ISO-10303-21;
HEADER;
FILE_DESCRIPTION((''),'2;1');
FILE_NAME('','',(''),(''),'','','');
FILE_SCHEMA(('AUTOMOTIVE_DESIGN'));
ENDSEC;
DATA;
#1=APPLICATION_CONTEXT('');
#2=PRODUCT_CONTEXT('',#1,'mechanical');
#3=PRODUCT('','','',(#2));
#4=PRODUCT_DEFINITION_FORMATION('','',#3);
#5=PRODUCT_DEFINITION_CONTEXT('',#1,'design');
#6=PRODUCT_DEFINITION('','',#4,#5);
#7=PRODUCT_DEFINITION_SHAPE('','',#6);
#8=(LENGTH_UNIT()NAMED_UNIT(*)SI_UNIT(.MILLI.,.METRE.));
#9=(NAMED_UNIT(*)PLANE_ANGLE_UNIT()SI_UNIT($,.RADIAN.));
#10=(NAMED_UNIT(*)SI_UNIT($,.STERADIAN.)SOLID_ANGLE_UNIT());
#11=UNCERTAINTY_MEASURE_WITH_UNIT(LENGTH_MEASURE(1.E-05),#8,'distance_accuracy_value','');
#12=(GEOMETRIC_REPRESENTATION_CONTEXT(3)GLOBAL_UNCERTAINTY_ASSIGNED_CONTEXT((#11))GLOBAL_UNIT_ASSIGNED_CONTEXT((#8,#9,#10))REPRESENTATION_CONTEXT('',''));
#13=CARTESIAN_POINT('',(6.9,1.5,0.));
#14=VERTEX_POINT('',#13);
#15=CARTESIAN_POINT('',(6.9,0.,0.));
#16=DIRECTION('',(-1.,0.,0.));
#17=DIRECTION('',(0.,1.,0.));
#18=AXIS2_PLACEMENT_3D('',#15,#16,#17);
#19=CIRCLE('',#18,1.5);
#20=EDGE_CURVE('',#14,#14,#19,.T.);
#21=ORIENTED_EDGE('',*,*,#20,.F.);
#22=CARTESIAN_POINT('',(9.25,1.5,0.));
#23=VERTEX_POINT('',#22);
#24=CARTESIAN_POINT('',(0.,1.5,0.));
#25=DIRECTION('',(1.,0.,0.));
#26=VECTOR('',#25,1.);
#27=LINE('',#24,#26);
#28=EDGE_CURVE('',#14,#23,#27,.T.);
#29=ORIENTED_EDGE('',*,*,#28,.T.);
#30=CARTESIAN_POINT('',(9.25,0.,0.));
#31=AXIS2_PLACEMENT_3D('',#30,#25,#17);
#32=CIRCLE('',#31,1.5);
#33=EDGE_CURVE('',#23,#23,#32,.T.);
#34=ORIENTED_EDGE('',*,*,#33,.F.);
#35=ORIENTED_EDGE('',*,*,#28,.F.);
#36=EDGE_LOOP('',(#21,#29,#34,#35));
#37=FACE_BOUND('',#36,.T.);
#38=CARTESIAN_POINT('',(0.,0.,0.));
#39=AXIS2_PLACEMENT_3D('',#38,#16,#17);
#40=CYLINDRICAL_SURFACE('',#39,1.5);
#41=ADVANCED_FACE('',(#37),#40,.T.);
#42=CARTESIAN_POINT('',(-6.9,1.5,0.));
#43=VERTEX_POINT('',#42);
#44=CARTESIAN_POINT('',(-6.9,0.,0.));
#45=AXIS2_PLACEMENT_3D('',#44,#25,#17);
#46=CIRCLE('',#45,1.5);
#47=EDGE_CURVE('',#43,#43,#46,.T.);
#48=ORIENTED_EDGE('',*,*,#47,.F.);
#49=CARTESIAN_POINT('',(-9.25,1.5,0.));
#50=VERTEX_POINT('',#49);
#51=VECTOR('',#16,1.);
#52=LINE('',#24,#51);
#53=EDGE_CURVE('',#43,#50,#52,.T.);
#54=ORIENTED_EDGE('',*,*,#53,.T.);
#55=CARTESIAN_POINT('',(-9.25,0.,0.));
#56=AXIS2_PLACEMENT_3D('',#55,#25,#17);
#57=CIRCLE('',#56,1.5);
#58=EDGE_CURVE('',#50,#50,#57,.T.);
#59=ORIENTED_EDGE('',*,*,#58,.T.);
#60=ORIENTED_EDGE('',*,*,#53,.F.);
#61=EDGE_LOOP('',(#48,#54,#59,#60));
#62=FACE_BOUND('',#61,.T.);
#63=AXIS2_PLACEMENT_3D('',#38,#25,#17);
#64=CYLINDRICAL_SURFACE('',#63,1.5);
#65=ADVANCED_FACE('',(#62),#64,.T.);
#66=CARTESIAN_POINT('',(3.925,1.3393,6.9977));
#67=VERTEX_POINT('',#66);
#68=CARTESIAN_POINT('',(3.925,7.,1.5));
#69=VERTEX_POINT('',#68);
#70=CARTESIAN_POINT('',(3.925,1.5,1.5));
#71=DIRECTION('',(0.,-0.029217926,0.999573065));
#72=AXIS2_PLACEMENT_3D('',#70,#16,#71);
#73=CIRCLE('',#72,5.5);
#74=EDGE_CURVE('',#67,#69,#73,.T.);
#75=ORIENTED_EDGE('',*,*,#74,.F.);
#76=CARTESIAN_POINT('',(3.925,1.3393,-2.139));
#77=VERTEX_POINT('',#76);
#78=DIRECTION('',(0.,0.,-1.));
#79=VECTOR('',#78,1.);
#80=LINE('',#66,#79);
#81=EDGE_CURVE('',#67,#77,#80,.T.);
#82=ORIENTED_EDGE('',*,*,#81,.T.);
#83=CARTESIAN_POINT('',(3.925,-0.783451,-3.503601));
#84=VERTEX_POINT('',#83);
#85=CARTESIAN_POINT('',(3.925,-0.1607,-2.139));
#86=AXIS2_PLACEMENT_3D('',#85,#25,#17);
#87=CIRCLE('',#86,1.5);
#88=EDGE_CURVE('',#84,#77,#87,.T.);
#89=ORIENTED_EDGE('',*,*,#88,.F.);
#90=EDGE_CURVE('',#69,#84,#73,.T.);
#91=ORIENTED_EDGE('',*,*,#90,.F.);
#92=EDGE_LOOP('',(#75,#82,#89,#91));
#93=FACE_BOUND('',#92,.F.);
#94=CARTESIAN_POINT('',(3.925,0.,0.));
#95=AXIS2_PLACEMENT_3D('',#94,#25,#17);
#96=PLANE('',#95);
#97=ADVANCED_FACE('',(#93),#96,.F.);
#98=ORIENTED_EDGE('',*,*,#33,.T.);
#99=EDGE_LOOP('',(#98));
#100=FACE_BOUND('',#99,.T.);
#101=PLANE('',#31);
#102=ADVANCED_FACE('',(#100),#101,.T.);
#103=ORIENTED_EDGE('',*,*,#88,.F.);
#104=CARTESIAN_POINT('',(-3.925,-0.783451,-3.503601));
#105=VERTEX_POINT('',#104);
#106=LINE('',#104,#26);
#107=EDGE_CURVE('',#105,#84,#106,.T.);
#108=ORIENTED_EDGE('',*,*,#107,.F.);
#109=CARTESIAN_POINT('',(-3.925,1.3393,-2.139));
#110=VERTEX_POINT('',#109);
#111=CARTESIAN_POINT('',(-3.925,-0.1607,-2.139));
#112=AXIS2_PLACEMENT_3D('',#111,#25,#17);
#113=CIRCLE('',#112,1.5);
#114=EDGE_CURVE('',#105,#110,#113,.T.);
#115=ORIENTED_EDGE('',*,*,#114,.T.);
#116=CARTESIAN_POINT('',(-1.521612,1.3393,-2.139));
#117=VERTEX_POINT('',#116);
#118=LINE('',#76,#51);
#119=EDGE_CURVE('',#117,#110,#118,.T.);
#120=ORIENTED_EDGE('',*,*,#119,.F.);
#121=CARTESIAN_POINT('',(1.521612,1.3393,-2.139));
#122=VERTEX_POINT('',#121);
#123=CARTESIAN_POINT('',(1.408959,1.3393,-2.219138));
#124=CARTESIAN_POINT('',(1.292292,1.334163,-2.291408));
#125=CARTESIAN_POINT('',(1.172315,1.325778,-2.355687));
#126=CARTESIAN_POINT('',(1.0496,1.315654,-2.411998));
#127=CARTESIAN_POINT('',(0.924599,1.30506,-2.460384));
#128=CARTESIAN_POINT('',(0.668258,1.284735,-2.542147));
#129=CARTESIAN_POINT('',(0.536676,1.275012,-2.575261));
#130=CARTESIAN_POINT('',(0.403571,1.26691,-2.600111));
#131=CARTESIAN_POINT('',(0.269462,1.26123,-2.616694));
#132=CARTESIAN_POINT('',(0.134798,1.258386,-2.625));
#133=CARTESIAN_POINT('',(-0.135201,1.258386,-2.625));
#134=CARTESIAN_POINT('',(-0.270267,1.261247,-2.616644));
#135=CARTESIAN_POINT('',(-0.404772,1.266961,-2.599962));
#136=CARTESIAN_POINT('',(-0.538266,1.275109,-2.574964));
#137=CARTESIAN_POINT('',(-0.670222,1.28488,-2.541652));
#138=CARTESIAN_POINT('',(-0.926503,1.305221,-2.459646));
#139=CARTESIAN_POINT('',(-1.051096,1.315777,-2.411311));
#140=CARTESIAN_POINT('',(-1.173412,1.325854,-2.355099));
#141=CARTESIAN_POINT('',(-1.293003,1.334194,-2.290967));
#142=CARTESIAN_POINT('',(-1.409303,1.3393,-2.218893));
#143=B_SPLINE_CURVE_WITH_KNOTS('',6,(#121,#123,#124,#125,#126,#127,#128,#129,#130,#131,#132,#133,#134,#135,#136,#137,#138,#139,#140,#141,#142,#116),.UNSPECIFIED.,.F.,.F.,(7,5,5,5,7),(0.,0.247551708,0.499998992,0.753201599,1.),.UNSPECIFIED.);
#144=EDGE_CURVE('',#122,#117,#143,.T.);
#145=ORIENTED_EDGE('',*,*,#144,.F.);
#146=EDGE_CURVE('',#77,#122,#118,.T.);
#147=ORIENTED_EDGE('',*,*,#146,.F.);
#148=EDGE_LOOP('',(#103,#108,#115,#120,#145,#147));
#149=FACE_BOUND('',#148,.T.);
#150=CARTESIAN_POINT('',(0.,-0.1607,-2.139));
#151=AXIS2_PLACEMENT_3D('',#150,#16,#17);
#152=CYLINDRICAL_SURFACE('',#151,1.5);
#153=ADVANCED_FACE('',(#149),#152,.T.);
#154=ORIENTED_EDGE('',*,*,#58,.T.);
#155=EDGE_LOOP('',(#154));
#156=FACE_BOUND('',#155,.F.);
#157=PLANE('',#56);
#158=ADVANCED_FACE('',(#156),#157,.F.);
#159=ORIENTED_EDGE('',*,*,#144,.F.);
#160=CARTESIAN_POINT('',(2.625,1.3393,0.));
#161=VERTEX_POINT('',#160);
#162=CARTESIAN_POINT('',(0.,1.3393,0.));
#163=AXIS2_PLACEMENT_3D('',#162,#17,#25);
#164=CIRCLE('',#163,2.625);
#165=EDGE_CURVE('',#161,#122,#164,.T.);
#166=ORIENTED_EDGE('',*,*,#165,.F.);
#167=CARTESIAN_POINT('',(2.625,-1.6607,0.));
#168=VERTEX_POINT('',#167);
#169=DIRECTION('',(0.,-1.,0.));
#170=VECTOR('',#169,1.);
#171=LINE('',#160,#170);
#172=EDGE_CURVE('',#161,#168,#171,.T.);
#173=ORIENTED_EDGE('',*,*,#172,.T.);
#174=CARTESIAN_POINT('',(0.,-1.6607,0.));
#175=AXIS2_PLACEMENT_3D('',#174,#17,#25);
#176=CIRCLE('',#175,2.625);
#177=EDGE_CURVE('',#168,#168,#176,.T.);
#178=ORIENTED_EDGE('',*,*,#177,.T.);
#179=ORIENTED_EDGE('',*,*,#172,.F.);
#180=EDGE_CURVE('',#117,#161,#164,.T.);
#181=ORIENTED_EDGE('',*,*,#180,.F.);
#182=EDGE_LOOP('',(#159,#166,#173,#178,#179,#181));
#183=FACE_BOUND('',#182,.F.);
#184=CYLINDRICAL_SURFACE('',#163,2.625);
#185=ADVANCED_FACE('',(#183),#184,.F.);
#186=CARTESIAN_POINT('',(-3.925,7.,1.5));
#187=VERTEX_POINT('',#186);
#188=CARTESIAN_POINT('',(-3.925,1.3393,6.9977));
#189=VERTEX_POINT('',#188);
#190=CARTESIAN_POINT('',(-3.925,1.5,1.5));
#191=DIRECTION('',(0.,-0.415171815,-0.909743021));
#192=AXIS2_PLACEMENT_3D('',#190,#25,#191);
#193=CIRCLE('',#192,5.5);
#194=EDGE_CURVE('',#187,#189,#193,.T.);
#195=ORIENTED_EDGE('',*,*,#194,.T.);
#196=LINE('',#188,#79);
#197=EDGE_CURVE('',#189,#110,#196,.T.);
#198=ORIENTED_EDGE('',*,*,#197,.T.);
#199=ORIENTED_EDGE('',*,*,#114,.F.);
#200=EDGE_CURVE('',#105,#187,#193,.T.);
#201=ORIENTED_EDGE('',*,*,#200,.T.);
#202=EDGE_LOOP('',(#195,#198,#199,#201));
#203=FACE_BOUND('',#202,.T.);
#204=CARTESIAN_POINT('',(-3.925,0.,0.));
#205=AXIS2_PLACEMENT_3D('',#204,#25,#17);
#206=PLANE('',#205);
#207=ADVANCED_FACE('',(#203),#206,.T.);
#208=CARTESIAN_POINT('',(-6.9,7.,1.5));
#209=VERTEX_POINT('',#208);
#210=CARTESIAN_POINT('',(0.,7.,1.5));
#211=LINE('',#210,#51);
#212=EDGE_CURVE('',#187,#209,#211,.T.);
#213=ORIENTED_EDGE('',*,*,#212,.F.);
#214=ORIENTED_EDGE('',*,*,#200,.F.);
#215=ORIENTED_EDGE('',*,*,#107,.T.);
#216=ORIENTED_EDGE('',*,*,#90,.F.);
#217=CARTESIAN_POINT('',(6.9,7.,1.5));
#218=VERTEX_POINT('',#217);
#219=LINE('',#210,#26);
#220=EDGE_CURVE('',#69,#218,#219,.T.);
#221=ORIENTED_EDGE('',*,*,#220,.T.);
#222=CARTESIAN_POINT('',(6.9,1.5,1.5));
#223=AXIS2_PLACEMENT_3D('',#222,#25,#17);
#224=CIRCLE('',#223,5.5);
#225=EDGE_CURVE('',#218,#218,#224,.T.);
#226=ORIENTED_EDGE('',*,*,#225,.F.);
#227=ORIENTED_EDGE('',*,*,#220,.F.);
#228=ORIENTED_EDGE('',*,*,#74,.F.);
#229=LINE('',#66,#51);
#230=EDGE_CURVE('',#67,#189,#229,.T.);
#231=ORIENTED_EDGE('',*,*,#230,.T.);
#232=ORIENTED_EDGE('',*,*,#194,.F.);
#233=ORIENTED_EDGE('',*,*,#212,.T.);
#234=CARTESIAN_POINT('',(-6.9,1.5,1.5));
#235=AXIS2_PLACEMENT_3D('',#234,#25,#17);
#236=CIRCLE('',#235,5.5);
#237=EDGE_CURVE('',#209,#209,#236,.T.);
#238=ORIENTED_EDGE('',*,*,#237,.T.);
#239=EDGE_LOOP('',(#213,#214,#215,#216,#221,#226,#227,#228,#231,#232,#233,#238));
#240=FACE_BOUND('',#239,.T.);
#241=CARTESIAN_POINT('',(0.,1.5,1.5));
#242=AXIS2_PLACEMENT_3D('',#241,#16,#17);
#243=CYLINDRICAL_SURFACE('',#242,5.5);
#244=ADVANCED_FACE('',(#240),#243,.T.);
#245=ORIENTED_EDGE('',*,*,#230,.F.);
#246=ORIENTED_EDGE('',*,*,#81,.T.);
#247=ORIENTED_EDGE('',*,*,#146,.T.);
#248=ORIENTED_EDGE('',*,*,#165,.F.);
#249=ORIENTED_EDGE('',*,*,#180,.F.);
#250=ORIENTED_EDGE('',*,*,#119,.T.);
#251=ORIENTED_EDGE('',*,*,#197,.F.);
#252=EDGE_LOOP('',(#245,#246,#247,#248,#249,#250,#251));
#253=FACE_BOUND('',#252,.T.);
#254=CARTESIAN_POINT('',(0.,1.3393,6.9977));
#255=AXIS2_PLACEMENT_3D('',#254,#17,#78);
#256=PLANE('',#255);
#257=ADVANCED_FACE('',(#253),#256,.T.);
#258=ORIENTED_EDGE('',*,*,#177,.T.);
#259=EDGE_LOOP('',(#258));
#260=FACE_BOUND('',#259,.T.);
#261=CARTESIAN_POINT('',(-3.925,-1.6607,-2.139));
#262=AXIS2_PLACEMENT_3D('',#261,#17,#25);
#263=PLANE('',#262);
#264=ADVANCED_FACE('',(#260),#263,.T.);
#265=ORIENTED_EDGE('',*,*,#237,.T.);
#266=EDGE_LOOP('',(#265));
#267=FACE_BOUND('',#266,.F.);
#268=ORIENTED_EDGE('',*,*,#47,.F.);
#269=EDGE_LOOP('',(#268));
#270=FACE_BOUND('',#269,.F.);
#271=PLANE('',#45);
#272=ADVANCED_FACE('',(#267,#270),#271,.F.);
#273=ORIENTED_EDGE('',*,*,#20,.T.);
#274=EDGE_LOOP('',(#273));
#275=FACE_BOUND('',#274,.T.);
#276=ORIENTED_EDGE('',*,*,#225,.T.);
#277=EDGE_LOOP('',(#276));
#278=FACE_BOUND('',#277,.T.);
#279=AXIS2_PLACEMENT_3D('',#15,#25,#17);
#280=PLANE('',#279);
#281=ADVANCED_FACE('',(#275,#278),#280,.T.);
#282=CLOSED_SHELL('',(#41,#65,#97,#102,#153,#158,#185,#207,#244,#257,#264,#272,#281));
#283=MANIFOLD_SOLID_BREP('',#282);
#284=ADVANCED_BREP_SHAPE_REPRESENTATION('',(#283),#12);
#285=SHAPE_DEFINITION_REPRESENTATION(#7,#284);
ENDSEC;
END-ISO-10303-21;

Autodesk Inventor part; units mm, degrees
ref_plane "YZ Plane" through (0, 0, 0) normal (1, 0, 0) x (0, 1, 0)
ref_plane "XZ Plane" through (0, 0, 0) normal (0, 1, 0) x (-1, 0, 0)
ref_plane "XY Plane" through (0, 0, 0) normal (0, 0, 1) x (1, 0, 0)
sketch "Sketch1" plane through (0, 0, 0) normal (1, 0, 0) x (0, 1, 0)
  circle A0 centre (0, 0) radius 1.5
  dimension "d0" = 3
extrude "Extrusion1" add sketch "Sketch1" along normal mid plane 18.5
sketch "Sketch2" plane through (0, 0, 0) normal (1, 0, 0) x (0, 1, 0)
  circle A0 centre (1.5, 1.5) radius 5.5
  point P0 (0, 0)
  dimension "cam_size" = 11
  dimension "top_ex" = 1.5
  dimension "d14" = 1.5
extrude "Extrusion2" add sketch "Sketch2" along normal mid plane 13.8
sketch "Sketch3" plane through (0, 0, 0) normal (1, 0, 0) x (0, 1, 0)
  circle A0 centre (1.5, 1.5) radius 5.5 projected
  line L0 (1.3393, 6.9977) -> (1.3393, -3.5197)
  circle A1 centre (-0.1607, -2.139) radius 1.5
  point P0 (0, 0)
  point P1 (1.3393, -2.139)
  point P2 (-0.7835, -3.5036)
  dimension "d8" = 3
extrude "Extrusion3" cut sketch "Sketch3" along normal mid plane 7.85 contours A0 A1 L0 picked at (1.7559, 3.9166)
sketch "Sketch4" plane through (-3.925, 1.3393, -2.139) normal (0, 1, 0) x (1, 0, 0)
  circle A0 centre (3.925, -2.139) radius 2.625
  line L0 (-5.325, -0.639) -> (-5.325, -3.639) projected
  point P0 (-5.325, -2.139)
  dimension "d11" = 5.25
extrude "Extrusion4" cut sketch "Sketch4" against normal blind 3
ref_plane "Work Plane1" through (0, 1.5, 1.5) normal (-1, 0, 0) x (0, 0, 1)
properties part number "custom_cam"
